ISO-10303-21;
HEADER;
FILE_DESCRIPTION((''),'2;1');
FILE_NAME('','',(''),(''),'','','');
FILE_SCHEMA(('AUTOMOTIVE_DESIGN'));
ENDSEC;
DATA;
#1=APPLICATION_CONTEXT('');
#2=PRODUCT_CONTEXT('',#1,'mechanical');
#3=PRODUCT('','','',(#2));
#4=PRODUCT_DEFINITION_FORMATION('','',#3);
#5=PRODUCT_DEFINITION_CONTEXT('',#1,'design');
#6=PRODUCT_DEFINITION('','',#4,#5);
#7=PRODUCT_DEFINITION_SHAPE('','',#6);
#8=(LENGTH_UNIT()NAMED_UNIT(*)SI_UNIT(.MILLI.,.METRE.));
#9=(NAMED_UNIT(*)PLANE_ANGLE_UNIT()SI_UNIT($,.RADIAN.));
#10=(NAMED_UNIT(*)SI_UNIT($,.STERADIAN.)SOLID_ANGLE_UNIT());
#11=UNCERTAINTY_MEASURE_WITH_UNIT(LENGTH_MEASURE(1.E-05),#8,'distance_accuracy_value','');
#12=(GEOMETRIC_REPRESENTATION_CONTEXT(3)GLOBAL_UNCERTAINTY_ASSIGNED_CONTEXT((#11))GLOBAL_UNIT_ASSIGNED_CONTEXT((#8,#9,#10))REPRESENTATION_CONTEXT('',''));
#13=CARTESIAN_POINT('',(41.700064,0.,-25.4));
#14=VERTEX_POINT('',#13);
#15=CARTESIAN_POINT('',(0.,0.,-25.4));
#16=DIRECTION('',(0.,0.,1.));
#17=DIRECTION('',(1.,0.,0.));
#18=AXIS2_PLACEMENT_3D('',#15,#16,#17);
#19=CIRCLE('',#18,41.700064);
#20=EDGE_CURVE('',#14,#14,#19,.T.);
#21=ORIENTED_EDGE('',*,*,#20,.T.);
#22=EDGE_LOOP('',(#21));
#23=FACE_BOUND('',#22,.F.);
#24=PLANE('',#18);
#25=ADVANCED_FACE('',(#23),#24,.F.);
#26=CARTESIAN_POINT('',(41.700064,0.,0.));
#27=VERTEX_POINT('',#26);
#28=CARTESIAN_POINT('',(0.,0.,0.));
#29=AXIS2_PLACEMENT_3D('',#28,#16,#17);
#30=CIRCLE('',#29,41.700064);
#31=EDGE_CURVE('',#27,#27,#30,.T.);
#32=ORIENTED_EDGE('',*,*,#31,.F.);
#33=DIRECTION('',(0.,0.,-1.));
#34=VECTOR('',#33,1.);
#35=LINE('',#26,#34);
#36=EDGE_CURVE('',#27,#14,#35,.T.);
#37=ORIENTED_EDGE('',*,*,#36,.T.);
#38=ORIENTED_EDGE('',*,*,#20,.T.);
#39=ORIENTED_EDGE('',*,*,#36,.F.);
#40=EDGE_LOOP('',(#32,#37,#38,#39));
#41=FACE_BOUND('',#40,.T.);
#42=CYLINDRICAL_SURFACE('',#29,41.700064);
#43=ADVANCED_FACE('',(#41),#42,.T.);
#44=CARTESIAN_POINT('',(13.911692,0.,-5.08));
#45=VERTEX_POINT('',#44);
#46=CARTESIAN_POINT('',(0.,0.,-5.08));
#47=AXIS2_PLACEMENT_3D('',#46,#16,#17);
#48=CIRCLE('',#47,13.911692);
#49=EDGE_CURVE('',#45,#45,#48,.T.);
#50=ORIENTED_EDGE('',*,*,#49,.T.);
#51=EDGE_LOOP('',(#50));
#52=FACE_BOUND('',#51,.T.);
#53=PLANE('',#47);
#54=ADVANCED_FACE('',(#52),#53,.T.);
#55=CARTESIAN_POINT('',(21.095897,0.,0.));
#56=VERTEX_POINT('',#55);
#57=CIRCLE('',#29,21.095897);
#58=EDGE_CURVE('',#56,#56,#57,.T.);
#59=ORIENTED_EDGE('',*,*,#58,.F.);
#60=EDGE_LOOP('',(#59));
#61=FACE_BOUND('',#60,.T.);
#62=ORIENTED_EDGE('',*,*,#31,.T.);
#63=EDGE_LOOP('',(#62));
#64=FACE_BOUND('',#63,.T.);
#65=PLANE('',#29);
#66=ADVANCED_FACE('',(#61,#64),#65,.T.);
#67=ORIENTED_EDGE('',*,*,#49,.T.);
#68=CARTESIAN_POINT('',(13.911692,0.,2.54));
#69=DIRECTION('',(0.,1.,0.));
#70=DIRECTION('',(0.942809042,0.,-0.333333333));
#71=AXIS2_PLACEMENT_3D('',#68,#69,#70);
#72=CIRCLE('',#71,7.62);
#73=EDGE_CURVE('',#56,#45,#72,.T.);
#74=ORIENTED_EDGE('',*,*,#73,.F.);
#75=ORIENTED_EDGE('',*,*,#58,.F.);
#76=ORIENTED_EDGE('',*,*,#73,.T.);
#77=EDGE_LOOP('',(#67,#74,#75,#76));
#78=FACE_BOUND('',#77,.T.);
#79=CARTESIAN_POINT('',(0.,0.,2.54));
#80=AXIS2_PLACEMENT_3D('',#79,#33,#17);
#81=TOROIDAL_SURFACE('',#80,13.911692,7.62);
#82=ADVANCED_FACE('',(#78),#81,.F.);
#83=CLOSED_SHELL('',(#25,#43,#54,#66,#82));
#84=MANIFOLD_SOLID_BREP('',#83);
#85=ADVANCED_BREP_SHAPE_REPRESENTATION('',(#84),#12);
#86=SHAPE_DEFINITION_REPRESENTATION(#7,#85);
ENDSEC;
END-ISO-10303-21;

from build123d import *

# Parameters (mm, degrees)
F0_R     = 41.7000635609
F1_DEPTH = 25.4
F2_R     = 21.0958969827
F3_DEPTH = 5.08


# Not quite as in the source:
# - a fillet or chamfer that OpenCascade refuses, or shapes differently, is made with other operations: its cross-section is extruded or revolved along the edge and cut away or added


with BuildPart() as f1:
    # F0 (on Top) → F1 (new body)
    with BuildSketch(Plane.XY):
        Circle(F0_R)
    extrude(amount=-F1_DEPTH)

    # F2 (on face) → F3 (cut)
    with BuildSketch(Plane.XY):
        Circle(F2_R)
    extrude(amount=-F3_DEPTH, mode=Mode.SUBTRACT)

    # F4: fillet of radius 7.62 on 1 edges, made by hand

    # F4_s1 → F4_t2 (revolve)
    with BuildSketch(Plane.XZ):
        with BuildLine():
            ThreePointArc((21.0958969827, 0), (18.3111011371, -3.6817039467), (13.9116920859, -5.08))
            Line((13.9116920859, -5.08), (21.0958969827, -5.08))
            Line((21.0958969827, -5.08), (21.0958969827, 0))
        make_face()
    revolve(axis=Axis((0, 0, -5.08), (0, 0, 1)))


solid = f1.part
